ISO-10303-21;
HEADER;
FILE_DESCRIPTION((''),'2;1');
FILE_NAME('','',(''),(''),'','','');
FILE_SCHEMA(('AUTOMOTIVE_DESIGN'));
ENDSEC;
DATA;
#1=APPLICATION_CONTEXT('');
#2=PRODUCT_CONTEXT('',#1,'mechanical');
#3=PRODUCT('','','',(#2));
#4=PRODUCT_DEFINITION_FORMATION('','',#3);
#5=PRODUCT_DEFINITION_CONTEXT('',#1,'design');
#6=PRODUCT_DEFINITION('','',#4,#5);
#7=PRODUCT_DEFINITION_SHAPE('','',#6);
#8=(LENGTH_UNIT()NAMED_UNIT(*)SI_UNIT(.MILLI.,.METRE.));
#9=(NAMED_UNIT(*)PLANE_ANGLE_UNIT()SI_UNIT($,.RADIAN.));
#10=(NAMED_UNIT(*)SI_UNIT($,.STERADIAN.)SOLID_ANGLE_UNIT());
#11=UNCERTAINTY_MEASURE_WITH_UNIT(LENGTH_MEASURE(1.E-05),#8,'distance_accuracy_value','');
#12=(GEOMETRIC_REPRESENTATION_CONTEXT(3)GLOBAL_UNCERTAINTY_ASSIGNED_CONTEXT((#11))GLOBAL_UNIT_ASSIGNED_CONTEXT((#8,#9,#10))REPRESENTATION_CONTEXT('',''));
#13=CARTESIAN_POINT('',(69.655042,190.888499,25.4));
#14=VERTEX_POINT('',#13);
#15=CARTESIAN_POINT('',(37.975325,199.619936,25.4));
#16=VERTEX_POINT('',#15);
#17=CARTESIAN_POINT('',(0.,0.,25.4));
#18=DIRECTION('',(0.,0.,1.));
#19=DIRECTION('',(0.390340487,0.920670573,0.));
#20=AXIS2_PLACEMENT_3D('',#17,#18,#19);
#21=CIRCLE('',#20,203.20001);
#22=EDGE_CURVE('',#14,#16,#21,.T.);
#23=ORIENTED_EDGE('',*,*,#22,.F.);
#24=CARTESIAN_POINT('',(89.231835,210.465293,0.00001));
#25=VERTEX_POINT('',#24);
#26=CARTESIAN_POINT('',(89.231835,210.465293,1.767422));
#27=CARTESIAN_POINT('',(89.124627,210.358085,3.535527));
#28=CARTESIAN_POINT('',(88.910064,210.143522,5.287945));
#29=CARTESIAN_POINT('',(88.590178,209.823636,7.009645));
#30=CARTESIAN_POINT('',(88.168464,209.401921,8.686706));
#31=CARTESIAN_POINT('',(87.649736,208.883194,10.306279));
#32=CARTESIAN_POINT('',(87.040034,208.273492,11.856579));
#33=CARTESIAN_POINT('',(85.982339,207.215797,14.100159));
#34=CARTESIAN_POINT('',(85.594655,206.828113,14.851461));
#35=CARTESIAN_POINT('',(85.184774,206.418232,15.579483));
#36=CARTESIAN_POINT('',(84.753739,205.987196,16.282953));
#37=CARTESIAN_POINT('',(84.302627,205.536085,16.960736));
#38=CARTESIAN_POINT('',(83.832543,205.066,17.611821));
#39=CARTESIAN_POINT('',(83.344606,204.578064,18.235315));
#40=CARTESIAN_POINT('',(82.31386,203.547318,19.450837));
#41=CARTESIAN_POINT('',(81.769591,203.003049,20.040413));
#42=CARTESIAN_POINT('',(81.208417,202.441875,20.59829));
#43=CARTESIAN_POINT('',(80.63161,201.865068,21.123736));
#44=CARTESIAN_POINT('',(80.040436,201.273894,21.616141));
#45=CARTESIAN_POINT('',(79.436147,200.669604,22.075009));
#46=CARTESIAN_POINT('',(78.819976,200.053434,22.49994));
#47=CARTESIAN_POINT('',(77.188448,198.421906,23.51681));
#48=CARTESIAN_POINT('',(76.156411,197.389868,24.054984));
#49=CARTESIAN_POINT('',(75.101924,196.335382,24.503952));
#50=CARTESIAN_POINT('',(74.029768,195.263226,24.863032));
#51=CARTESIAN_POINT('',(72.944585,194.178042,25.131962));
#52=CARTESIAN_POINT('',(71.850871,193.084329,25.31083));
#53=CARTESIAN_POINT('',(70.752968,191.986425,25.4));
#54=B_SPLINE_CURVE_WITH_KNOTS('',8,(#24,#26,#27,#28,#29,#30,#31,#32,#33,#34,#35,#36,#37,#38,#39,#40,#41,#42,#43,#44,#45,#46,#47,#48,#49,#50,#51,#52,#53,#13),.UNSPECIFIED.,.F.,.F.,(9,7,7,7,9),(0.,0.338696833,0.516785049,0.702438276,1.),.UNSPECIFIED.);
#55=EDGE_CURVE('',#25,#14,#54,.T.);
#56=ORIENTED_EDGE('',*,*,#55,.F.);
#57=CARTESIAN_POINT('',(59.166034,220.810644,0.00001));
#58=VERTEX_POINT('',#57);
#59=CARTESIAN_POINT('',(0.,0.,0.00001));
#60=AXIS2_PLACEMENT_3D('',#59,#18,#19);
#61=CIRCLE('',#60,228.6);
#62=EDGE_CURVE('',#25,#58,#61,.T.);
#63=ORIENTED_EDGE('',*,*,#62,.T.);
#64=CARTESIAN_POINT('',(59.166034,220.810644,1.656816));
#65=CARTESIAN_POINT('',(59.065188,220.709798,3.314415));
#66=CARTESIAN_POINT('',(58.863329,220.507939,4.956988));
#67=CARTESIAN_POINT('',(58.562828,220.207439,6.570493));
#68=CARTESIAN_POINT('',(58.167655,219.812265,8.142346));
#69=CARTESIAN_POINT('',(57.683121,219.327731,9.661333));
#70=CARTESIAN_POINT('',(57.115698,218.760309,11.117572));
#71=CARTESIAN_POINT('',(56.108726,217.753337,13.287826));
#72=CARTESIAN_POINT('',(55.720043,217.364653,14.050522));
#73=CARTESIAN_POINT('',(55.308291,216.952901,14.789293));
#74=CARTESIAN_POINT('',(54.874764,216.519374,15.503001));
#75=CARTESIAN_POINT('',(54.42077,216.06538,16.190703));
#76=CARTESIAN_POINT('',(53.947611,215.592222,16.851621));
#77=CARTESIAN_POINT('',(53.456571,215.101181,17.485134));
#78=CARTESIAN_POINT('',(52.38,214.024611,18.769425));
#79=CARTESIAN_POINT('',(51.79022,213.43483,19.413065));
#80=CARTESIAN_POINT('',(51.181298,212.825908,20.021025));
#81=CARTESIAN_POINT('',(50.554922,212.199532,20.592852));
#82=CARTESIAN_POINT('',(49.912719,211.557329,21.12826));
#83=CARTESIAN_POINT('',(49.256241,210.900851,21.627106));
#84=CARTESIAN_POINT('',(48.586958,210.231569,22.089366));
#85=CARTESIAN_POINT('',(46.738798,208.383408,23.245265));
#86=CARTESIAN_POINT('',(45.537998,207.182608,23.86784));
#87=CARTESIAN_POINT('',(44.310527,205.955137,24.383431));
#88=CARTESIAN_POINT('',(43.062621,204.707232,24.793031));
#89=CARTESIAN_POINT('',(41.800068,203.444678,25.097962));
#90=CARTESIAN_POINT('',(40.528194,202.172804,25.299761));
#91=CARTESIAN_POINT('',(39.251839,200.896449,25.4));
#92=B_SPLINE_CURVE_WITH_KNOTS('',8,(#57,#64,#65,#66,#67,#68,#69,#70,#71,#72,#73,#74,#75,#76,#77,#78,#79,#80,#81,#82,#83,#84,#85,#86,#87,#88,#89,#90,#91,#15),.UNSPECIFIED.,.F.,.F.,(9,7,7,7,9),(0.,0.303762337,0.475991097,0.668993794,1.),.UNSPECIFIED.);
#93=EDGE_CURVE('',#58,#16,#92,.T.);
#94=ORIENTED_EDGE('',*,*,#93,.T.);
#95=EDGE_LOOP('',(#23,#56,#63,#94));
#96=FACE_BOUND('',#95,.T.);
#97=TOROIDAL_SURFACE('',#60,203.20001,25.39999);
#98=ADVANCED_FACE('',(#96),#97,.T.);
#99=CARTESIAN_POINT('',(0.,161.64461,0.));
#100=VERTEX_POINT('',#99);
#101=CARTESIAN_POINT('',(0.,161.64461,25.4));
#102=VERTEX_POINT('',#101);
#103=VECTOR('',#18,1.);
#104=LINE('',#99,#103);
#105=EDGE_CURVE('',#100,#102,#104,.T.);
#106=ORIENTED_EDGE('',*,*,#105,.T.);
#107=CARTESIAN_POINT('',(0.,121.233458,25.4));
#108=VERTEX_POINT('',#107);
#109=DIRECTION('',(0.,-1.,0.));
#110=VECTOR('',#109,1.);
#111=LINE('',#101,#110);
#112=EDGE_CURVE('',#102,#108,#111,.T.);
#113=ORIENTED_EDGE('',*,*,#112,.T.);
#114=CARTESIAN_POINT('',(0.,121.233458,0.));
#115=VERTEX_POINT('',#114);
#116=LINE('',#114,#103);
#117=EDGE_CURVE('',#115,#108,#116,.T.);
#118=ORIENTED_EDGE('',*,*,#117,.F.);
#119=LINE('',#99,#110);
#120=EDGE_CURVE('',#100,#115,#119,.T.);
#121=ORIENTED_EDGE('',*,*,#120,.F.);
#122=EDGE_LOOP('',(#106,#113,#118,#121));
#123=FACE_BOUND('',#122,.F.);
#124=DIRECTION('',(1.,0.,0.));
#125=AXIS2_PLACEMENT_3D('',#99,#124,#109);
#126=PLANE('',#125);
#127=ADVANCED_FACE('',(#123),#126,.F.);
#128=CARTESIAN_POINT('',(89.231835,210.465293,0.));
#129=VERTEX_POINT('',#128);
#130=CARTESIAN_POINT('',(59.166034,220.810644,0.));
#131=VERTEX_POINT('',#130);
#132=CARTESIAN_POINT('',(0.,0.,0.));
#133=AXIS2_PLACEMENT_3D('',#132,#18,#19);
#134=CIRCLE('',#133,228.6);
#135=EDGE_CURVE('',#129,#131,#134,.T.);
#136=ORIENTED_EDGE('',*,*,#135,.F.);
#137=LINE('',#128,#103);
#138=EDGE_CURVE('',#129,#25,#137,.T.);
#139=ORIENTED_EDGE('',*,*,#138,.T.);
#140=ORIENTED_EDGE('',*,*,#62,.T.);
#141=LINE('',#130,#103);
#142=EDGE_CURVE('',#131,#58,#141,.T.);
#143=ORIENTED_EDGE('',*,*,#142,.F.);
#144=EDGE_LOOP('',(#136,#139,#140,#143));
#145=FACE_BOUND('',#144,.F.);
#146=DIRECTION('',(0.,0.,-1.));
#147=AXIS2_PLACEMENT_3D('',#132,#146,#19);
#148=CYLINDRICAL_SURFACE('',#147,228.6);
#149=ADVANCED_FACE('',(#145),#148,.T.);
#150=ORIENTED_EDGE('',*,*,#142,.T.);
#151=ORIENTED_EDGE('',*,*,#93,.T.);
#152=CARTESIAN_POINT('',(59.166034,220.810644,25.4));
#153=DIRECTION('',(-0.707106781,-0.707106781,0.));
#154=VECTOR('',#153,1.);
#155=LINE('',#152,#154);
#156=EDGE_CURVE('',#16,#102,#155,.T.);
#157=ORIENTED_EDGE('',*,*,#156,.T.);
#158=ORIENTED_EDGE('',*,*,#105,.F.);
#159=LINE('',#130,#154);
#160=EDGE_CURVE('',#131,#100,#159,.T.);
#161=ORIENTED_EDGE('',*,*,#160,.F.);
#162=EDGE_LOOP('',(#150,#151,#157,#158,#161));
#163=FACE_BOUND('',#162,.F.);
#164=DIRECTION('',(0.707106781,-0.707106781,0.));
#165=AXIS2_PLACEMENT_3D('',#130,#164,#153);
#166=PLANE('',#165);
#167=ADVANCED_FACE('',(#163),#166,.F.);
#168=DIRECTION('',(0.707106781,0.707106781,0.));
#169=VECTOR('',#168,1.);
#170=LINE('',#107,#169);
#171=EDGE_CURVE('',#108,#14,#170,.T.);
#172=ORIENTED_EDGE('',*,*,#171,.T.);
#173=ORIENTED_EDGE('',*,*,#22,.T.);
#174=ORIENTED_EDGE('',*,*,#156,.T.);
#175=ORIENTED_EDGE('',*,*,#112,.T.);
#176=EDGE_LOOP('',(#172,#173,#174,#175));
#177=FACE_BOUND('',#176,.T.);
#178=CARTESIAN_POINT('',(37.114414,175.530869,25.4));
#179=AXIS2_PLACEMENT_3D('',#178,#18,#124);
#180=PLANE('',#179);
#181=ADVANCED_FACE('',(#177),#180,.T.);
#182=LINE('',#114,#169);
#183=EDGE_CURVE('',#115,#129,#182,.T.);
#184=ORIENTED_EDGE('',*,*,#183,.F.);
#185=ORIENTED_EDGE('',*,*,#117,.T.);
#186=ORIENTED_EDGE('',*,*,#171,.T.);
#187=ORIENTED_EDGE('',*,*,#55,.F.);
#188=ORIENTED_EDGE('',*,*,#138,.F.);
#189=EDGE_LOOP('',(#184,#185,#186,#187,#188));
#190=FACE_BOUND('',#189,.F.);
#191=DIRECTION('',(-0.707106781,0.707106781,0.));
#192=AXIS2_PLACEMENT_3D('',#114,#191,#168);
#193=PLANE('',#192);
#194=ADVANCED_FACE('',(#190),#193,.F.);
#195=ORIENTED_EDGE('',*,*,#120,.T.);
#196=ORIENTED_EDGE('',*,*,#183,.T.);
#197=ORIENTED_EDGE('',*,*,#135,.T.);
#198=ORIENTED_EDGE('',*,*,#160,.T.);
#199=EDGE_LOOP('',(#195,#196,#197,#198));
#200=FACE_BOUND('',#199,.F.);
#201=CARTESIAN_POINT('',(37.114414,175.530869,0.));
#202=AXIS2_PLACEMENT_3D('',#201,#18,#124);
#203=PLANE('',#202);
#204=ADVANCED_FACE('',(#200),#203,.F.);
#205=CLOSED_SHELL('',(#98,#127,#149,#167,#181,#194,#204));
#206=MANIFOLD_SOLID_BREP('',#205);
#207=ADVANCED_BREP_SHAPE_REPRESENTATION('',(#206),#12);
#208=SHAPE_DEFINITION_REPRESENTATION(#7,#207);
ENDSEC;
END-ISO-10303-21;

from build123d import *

# Parameters (mm, degrees)
F2_DEPTH = 25.4
F3_R     = 25.39999


# Not quite as in the source:
# - a fillet or chamfer is up to 0.001 mm smaller than in the source, because OpenCascade refuses the exact size


with BuildPart() as f2:
    # F1 (on face) → F2 (new body)
    with BuildSketch(Plane.XY):
        with BuildLine():
            Line((0, 161.6446101792), (0, 121.2334576344))
            Line((0, 121.2334576344), (89.2318353651, 210.4652929995))
            ThreePointArc((89.2318353651, 210.4652929995), (74.3790189354, 216.1613322086), (59.1660337104, 220.8106438897))
            Line((59.1660337104, 220.8106438897), (0, 161.6446101792))
        make_face()
    extrude(amount=F2_DEPTH)

    # F3 (radius 25.4 in the source; OpenCascade refuses exactly that, so slightly less here)
    f3_edges = [f2.edges().sort_by_distance(p)[0] for p in [
        (74.379019, 216.161332, 25.4),
    ]]
    fillet(f3_edges, radius=F3_R)


solid = f2.part
